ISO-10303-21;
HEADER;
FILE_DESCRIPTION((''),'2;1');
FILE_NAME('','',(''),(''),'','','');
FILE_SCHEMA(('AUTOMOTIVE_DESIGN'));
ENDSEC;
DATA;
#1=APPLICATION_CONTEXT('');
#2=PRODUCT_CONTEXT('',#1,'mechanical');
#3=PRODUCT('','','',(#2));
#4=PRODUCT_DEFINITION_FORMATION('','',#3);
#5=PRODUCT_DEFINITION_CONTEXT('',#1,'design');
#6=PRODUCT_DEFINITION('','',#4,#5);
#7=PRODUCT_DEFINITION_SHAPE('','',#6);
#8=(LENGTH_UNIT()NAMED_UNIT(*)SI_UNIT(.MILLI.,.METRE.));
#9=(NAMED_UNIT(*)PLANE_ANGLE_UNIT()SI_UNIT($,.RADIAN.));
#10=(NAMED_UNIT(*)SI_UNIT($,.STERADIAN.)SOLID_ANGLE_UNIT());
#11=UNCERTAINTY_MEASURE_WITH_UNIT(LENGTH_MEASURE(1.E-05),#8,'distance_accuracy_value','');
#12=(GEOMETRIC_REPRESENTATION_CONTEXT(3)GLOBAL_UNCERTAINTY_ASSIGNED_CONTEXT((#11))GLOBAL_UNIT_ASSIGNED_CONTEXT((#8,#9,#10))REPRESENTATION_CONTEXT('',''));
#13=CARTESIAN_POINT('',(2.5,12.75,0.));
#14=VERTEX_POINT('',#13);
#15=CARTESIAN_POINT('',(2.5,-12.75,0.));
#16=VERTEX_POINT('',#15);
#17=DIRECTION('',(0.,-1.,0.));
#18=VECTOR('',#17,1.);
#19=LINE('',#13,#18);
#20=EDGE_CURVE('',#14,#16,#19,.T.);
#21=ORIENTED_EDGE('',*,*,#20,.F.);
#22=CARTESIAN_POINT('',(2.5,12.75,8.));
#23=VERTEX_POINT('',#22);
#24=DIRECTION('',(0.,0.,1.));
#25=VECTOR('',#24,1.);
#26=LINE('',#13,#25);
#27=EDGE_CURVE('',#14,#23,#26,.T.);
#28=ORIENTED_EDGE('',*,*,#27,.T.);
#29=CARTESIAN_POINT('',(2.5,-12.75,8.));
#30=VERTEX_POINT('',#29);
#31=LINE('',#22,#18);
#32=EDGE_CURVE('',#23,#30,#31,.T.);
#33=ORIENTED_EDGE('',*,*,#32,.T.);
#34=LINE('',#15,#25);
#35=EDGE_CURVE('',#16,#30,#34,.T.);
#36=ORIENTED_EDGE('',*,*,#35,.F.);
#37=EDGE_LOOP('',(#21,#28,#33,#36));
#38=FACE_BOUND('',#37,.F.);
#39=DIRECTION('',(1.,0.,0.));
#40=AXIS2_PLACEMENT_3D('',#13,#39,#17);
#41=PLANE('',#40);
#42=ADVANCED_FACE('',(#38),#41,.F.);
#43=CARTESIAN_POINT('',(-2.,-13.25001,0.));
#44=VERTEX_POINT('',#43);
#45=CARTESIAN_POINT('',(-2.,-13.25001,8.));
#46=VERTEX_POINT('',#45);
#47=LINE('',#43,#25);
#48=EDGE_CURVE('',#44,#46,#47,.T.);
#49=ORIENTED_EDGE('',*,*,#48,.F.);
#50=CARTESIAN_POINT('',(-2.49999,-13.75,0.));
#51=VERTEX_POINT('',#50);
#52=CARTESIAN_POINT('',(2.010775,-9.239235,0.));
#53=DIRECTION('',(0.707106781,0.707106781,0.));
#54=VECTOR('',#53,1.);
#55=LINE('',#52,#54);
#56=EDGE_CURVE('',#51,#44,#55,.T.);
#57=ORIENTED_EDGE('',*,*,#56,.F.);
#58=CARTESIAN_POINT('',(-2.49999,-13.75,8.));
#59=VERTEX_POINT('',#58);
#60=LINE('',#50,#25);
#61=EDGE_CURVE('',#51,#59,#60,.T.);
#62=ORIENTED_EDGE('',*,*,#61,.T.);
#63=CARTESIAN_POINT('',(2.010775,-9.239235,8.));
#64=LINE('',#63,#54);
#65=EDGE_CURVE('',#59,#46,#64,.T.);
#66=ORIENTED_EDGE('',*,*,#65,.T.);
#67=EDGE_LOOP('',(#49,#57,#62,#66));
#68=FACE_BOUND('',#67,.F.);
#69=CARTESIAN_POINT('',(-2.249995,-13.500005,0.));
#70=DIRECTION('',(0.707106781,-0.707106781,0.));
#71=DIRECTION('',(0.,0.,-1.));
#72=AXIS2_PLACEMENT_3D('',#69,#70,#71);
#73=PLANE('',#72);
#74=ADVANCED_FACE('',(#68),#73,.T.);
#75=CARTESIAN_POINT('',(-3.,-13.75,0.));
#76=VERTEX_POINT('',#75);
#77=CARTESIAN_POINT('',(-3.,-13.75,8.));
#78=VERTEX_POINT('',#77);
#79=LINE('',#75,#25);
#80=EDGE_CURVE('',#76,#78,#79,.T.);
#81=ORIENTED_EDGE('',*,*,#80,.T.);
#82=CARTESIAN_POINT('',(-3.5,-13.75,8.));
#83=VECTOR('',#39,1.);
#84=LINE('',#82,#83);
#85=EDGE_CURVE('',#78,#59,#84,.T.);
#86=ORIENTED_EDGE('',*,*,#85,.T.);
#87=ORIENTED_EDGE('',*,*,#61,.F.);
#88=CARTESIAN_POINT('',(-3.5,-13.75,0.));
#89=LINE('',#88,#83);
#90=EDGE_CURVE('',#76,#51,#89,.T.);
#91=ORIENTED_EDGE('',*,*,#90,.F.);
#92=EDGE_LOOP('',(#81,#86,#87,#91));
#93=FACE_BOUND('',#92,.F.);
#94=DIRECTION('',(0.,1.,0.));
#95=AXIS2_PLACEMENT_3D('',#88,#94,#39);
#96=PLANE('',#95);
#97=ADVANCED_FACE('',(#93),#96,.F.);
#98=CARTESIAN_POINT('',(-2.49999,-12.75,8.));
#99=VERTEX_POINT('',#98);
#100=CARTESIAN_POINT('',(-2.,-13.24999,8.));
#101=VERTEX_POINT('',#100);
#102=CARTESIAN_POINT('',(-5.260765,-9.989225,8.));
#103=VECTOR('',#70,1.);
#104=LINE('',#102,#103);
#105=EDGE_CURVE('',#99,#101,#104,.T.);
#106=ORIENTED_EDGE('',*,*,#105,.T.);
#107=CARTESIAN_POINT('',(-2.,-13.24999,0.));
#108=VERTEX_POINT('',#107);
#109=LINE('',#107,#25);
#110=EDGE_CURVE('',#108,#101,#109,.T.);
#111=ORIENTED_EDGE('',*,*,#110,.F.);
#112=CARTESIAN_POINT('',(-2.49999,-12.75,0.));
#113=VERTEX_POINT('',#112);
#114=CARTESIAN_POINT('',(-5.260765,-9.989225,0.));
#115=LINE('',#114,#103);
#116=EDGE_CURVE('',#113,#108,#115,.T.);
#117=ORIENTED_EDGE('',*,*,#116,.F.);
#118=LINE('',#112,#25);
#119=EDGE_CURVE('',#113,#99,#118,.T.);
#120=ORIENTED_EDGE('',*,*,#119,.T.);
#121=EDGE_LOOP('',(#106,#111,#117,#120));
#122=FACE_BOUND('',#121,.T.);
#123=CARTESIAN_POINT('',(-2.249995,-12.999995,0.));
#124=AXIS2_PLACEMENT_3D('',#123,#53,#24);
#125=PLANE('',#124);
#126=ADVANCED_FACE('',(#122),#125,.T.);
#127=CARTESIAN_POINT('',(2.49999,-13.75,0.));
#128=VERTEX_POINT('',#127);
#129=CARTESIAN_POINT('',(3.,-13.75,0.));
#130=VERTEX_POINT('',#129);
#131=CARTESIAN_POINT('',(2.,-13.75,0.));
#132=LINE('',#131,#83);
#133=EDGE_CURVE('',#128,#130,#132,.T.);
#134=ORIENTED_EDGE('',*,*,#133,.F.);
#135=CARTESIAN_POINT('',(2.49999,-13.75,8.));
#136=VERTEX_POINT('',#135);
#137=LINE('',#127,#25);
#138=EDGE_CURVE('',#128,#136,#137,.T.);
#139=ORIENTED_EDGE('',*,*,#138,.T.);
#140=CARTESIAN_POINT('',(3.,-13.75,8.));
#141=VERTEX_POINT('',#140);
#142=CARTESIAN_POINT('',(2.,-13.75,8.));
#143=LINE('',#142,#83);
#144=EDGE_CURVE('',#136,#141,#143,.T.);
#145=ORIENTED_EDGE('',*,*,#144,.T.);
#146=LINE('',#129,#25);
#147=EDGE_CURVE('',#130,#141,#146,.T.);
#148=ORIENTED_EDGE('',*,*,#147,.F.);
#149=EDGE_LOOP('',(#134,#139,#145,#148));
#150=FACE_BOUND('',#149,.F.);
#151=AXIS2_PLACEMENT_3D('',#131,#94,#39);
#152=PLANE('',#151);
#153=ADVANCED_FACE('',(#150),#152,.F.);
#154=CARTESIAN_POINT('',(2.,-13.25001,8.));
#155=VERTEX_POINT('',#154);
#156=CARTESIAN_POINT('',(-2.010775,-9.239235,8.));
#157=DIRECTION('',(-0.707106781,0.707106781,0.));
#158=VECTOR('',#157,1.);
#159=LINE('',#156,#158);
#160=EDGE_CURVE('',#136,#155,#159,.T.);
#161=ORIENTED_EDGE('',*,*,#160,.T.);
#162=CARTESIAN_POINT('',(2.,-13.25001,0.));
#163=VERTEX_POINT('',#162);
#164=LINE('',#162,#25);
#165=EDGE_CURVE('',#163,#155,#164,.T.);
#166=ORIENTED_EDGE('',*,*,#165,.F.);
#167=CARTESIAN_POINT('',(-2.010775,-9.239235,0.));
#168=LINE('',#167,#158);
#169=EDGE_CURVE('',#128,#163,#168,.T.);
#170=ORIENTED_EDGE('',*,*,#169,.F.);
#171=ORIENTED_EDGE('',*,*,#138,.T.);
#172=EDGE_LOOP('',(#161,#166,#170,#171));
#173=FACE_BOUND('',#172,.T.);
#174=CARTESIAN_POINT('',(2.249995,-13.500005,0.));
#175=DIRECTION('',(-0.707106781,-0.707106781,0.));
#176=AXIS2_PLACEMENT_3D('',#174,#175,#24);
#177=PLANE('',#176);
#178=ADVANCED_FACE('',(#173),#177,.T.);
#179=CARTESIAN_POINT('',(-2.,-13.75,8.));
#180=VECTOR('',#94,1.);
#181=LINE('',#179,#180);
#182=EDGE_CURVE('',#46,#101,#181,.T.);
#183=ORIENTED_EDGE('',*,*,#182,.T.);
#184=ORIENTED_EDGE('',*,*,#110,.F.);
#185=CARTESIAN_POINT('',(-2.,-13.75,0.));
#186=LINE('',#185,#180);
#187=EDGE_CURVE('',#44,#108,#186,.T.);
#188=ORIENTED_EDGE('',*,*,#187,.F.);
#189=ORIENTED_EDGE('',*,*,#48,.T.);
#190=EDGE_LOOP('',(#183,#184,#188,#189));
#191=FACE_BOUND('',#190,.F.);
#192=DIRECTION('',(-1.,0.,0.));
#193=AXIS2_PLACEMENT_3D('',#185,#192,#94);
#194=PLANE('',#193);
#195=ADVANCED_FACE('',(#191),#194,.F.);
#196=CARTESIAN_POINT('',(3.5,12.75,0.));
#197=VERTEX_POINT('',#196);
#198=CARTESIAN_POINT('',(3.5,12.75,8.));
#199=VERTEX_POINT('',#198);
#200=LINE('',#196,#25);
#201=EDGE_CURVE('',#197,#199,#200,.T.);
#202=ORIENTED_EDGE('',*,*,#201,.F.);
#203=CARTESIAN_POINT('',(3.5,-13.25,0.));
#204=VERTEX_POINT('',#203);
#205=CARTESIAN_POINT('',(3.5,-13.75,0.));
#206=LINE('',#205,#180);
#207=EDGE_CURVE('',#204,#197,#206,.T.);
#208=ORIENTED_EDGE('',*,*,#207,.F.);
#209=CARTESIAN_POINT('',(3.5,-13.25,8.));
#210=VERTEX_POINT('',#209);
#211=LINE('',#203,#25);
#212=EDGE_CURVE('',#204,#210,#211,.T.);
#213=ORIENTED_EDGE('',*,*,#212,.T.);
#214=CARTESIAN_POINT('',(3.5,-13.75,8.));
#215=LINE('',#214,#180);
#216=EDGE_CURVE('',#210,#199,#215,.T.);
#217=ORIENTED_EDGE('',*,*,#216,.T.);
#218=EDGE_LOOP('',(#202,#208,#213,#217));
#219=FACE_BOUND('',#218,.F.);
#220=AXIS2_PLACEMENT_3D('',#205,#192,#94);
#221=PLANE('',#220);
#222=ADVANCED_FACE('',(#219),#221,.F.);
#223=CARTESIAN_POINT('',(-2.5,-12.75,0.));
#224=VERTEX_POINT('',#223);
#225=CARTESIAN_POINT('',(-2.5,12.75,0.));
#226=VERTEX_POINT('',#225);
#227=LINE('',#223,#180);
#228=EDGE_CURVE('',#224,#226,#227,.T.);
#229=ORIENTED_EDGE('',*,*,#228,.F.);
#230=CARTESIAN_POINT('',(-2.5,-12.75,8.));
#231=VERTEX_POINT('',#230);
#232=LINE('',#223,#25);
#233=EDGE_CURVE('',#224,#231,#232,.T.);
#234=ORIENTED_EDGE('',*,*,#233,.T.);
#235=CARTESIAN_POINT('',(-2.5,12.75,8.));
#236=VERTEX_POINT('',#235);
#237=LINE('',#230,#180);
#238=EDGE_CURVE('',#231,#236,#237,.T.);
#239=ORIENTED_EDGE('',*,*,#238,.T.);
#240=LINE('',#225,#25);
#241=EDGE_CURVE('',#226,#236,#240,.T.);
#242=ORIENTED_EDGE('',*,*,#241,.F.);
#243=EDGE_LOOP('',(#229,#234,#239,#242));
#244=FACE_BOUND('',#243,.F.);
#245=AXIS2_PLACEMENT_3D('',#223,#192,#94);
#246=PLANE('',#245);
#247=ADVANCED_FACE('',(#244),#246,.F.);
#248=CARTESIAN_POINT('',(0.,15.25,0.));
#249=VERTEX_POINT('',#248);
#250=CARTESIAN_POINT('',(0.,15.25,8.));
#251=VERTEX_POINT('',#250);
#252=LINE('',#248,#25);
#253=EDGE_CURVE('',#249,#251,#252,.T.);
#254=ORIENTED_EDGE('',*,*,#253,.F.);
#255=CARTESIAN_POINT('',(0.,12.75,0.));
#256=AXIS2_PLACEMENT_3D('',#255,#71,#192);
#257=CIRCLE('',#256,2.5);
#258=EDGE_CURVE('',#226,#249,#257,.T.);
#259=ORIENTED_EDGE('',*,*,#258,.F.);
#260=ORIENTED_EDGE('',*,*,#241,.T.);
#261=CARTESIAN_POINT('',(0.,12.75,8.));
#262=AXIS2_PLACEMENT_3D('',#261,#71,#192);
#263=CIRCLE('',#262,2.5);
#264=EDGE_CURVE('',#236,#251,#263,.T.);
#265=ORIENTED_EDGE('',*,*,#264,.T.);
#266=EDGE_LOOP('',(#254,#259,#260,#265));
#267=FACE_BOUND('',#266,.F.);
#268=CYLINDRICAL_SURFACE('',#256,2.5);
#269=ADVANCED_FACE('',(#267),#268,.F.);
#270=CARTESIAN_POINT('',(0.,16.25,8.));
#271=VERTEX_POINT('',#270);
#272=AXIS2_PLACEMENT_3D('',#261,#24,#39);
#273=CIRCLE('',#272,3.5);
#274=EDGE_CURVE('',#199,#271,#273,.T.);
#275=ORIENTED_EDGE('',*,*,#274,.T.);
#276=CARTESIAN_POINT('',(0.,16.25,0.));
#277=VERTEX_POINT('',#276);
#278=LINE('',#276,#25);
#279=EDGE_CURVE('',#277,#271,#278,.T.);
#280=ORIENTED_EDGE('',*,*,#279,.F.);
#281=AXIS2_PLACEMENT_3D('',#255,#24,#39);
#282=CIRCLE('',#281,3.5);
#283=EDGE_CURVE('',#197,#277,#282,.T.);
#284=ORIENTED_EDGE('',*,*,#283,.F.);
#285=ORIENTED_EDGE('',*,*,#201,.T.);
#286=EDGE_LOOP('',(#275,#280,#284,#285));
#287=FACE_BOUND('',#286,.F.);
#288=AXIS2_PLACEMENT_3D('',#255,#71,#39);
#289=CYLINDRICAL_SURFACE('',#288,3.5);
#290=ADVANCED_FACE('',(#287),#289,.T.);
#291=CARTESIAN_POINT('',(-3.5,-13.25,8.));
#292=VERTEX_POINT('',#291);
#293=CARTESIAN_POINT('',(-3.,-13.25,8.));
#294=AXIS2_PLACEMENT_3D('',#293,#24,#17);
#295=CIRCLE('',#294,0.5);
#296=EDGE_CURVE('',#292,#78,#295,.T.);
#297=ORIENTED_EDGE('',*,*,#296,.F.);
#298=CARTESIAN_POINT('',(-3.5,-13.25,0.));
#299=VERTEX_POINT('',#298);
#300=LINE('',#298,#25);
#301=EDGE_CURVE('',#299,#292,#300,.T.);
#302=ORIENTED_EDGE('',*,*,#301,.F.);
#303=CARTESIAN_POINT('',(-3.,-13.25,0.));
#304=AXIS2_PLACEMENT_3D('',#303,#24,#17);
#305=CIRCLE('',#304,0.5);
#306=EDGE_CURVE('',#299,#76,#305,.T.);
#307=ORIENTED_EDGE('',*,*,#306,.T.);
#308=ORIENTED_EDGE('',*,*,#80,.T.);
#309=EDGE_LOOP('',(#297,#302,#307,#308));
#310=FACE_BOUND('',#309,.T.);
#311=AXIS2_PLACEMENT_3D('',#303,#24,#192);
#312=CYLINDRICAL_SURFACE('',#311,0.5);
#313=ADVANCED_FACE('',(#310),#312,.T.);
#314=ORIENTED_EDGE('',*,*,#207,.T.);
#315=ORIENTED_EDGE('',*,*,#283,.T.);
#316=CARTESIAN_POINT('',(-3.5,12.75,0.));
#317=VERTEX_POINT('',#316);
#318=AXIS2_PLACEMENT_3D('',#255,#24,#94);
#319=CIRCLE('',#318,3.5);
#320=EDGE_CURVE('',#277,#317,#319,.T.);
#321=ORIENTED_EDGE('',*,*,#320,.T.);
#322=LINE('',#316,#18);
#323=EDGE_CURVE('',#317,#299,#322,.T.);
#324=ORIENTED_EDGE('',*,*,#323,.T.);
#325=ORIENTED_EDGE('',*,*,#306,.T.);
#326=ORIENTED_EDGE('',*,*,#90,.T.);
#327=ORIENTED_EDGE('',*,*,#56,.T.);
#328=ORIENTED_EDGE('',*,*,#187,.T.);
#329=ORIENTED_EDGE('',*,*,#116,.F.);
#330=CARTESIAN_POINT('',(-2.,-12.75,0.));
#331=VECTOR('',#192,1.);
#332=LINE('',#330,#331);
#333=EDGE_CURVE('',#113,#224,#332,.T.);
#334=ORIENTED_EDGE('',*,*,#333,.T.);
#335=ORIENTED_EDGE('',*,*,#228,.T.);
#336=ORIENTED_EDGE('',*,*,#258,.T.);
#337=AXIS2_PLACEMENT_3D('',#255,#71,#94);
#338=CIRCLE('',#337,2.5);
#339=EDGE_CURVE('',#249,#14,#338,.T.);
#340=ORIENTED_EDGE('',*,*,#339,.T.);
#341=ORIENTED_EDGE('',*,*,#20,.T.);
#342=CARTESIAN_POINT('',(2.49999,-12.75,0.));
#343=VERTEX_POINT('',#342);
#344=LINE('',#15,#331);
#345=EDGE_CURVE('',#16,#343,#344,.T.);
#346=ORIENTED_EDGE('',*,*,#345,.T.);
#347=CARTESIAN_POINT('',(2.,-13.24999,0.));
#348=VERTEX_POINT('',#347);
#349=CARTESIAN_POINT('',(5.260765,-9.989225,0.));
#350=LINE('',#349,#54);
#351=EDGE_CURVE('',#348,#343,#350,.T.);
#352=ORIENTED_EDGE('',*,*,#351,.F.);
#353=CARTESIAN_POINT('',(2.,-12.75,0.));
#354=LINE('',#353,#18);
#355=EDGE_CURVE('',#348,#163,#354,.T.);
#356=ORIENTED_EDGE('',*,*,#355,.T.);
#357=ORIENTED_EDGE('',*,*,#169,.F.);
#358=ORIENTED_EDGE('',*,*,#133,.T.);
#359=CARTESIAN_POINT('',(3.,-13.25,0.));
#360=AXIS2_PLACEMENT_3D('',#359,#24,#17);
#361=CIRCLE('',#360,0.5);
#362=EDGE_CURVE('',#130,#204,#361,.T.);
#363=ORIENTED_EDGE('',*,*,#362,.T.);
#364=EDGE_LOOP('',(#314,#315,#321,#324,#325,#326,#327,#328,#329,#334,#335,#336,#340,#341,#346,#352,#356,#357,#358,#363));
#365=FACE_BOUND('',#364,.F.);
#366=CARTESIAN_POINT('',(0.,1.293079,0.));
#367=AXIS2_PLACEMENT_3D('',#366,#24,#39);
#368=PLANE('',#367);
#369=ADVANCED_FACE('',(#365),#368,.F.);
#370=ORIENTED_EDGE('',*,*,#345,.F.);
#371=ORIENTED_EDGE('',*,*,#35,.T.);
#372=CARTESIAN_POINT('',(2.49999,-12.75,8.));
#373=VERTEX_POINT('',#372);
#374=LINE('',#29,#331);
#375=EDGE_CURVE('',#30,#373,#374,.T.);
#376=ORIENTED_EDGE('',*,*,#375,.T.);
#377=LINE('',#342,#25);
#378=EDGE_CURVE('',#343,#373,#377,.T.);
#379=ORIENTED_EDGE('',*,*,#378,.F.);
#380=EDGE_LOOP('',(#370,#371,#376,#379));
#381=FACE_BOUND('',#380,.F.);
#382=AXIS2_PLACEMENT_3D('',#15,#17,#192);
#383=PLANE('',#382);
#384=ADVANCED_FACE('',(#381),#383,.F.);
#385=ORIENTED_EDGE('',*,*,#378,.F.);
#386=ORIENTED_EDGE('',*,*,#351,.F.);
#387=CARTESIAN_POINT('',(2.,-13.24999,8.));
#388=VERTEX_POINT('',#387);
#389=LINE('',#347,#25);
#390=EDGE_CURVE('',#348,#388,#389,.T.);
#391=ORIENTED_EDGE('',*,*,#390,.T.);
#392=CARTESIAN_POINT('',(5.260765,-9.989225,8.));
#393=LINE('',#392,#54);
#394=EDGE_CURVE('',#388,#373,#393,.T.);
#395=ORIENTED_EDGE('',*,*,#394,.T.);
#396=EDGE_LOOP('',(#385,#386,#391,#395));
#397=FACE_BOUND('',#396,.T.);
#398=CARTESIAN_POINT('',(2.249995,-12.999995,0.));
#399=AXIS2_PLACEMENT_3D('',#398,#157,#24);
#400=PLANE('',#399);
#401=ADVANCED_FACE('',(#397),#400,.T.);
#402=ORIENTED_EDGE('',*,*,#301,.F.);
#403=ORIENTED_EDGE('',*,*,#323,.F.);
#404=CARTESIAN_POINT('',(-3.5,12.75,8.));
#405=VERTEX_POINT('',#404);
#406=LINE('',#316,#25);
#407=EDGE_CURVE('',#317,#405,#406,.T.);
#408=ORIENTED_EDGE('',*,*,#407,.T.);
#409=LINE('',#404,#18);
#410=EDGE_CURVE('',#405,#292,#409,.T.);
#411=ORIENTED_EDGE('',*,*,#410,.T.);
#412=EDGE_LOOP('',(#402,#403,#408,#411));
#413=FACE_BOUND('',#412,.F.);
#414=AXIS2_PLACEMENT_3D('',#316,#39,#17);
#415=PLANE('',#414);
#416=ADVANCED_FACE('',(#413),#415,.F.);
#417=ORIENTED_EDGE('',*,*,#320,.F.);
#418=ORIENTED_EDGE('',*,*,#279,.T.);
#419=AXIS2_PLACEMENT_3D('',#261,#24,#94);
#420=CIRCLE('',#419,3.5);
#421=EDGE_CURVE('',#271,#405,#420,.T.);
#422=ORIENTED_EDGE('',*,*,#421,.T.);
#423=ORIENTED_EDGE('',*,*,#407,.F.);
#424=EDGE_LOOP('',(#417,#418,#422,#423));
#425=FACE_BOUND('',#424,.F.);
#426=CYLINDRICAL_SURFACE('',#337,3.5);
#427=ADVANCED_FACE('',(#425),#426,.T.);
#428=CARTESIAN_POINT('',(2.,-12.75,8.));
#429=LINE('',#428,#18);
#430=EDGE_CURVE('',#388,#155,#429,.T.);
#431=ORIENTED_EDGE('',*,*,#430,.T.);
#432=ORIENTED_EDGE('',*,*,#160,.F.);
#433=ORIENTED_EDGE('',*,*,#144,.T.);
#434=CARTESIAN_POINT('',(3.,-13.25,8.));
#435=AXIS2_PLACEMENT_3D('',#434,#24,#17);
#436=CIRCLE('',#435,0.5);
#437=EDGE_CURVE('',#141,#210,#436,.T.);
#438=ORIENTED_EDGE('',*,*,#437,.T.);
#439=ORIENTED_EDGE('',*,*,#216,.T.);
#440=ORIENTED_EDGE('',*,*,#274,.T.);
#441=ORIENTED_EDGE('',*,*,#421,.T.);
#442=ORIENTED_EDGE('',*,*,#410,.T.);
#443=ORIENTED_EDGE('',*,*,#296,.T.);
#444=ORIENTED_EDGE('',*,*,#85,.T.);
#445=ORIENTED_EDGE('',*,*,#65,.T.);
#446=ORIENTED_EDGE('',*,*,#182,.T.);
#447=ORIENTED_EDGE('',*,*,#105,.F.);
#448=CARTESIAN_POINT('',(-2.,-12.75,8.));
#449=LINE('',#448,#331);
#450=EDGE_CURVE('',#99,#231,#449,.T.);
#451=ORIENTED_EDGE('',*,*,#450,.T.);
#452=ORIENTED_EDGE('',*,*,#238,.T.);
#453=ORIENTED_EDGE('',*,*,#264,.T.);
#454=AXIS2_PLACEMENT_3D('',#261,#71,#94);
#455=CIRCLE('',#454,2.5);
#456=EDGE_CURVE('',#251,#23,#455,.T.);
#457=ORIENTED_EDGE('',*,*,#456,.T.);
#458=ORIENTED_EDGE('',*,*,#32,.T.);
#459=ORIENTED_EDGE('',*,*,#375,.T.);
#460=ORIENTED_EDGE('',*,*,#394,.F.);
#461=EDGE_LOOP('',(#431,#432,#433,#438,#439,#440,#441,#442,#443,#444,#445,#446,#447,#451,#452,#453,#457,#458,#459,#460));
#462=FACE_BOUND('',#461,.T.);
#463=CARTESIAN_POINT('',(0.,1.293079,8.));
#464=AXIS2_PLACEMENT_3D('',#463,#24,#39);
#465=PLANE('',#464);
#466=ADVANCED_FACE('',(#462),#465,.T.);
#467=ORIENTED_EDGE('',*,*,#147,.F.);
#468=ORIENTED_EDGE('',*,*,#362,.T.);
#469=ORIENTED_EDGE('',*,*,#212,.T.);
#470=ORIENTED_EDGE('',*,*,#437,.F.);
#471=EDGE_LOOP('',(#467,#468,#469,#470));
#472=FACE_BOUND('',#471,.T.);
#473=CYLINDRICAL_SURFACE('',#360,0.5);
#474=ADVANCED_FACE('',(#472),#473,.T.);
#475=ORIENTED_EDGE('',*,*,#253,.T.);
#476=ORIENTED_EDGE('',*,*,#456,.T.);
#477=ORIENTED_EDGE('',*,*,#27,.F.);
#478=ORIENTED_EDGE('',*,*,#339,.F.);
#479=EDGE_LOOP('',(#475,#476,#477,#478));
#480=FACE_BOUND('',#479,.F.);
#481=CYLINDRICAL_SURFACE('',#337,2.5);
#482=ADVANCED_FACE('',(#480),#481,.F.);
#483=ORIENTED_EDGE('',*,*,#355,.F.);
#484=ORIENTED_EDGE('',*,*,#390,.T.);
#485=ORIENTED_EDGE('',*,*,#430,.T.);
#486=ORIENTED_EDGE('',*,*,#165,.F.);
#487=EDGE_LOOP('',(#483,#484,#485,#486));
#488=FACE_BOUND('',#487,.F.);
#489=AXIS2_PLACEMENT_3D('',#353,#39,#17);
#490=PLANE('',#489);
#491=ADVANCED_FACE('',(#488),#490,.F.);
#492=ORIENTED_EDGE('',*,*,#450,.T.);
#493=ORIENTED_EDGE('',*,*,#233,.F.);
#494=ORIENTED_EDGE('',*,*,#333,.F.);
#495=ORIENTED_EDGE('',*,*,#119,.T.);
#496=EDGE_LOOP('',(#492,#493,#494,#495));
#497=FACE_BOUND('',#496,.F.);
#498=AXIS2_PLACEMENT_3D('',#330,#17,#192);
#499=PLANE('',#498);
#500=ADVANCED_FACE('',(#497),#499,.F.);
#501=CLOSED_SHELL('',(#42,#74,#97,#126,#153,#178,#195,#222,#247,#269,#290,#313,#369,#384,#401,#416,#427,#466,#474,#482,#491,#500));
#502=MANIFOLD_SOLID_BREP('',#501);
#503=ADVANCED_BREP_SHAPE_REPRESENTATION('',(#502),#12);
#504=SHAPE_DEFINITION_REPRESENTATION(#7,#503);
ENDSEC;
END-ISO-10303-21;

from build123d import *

# Parameters (mm, degrees)
F1_DEPTH = 8
F2_R     = 0.5
F3_SIZE  = 0.49999


# Not quite as in the source:
# - a fillet or chamfer is up to 0.001 mm smaller than in the source, because OpenCascade refuses the exact size


with BuildPart() as f1:
    # F0 (on Top) → F1 (new body)
    with BuildSketch(Plane.XY):
        with BuildLine():
            Line((-2.5, -12.75), (-2.5, 12.75))
            ThreePointArc((-2.5, 12.75), (-1.767766953, 14.517766953), (0, 15.25))
            ThreePointArc((0, 15.25), (1.767766953, 14.517766953), (2.5, 12.75))
            Line((2.5, 12.75), (2.5, -12.75))
            Line((2.5, -12.75), (2, -12.75))
            Line((2, -12.75), (2, -13.75))
            Line((2, -13.75), (3.5, -13.75))
            Line((3.5, -13.75), (3.5, 12.75))
            ThreePointArc((3.5, 12.75), (2.4748737342, 15.2248737342), (0, 16.25))
            ThreePointArc((0, 16.25), (-2.4748737342, 15.2248737342), (-3.5, 12.75))
            Line((-3.5, 12.75), (-3.5, -13.75))
            Line((-3.5, -13.75), (-2, -13.75))
            Line((-2, -13.75), (-2, -12.75))
            Line((-2, -12.75), (-2.5, -12.75))
        make_face()
    extrude(amount=F1_DEPTH)

    # F2
    f2_edges = [f1.edges().sort_by_distance(p)[0] for p in [
        (-3.5, -13.75, 4),
        (3.5, -13.75, 4),
    ]]
    fillet(f2_edges, radius=F2_R)

    # F3 (size 0.5 in the source; OpenCascade refuses exactly that, so slightly less here)
    f3_edges = [f1.edges().sort_by_distance(p)[0] for p in [
        (-2, -13.75, 4),
        (-2, -12.75, 4),
        (2, -13.75, 4),
        (2, -12.75, 4),
    ]]
    chamfer(f3_edges, length=F3_SIZE)


solid = f1.part
